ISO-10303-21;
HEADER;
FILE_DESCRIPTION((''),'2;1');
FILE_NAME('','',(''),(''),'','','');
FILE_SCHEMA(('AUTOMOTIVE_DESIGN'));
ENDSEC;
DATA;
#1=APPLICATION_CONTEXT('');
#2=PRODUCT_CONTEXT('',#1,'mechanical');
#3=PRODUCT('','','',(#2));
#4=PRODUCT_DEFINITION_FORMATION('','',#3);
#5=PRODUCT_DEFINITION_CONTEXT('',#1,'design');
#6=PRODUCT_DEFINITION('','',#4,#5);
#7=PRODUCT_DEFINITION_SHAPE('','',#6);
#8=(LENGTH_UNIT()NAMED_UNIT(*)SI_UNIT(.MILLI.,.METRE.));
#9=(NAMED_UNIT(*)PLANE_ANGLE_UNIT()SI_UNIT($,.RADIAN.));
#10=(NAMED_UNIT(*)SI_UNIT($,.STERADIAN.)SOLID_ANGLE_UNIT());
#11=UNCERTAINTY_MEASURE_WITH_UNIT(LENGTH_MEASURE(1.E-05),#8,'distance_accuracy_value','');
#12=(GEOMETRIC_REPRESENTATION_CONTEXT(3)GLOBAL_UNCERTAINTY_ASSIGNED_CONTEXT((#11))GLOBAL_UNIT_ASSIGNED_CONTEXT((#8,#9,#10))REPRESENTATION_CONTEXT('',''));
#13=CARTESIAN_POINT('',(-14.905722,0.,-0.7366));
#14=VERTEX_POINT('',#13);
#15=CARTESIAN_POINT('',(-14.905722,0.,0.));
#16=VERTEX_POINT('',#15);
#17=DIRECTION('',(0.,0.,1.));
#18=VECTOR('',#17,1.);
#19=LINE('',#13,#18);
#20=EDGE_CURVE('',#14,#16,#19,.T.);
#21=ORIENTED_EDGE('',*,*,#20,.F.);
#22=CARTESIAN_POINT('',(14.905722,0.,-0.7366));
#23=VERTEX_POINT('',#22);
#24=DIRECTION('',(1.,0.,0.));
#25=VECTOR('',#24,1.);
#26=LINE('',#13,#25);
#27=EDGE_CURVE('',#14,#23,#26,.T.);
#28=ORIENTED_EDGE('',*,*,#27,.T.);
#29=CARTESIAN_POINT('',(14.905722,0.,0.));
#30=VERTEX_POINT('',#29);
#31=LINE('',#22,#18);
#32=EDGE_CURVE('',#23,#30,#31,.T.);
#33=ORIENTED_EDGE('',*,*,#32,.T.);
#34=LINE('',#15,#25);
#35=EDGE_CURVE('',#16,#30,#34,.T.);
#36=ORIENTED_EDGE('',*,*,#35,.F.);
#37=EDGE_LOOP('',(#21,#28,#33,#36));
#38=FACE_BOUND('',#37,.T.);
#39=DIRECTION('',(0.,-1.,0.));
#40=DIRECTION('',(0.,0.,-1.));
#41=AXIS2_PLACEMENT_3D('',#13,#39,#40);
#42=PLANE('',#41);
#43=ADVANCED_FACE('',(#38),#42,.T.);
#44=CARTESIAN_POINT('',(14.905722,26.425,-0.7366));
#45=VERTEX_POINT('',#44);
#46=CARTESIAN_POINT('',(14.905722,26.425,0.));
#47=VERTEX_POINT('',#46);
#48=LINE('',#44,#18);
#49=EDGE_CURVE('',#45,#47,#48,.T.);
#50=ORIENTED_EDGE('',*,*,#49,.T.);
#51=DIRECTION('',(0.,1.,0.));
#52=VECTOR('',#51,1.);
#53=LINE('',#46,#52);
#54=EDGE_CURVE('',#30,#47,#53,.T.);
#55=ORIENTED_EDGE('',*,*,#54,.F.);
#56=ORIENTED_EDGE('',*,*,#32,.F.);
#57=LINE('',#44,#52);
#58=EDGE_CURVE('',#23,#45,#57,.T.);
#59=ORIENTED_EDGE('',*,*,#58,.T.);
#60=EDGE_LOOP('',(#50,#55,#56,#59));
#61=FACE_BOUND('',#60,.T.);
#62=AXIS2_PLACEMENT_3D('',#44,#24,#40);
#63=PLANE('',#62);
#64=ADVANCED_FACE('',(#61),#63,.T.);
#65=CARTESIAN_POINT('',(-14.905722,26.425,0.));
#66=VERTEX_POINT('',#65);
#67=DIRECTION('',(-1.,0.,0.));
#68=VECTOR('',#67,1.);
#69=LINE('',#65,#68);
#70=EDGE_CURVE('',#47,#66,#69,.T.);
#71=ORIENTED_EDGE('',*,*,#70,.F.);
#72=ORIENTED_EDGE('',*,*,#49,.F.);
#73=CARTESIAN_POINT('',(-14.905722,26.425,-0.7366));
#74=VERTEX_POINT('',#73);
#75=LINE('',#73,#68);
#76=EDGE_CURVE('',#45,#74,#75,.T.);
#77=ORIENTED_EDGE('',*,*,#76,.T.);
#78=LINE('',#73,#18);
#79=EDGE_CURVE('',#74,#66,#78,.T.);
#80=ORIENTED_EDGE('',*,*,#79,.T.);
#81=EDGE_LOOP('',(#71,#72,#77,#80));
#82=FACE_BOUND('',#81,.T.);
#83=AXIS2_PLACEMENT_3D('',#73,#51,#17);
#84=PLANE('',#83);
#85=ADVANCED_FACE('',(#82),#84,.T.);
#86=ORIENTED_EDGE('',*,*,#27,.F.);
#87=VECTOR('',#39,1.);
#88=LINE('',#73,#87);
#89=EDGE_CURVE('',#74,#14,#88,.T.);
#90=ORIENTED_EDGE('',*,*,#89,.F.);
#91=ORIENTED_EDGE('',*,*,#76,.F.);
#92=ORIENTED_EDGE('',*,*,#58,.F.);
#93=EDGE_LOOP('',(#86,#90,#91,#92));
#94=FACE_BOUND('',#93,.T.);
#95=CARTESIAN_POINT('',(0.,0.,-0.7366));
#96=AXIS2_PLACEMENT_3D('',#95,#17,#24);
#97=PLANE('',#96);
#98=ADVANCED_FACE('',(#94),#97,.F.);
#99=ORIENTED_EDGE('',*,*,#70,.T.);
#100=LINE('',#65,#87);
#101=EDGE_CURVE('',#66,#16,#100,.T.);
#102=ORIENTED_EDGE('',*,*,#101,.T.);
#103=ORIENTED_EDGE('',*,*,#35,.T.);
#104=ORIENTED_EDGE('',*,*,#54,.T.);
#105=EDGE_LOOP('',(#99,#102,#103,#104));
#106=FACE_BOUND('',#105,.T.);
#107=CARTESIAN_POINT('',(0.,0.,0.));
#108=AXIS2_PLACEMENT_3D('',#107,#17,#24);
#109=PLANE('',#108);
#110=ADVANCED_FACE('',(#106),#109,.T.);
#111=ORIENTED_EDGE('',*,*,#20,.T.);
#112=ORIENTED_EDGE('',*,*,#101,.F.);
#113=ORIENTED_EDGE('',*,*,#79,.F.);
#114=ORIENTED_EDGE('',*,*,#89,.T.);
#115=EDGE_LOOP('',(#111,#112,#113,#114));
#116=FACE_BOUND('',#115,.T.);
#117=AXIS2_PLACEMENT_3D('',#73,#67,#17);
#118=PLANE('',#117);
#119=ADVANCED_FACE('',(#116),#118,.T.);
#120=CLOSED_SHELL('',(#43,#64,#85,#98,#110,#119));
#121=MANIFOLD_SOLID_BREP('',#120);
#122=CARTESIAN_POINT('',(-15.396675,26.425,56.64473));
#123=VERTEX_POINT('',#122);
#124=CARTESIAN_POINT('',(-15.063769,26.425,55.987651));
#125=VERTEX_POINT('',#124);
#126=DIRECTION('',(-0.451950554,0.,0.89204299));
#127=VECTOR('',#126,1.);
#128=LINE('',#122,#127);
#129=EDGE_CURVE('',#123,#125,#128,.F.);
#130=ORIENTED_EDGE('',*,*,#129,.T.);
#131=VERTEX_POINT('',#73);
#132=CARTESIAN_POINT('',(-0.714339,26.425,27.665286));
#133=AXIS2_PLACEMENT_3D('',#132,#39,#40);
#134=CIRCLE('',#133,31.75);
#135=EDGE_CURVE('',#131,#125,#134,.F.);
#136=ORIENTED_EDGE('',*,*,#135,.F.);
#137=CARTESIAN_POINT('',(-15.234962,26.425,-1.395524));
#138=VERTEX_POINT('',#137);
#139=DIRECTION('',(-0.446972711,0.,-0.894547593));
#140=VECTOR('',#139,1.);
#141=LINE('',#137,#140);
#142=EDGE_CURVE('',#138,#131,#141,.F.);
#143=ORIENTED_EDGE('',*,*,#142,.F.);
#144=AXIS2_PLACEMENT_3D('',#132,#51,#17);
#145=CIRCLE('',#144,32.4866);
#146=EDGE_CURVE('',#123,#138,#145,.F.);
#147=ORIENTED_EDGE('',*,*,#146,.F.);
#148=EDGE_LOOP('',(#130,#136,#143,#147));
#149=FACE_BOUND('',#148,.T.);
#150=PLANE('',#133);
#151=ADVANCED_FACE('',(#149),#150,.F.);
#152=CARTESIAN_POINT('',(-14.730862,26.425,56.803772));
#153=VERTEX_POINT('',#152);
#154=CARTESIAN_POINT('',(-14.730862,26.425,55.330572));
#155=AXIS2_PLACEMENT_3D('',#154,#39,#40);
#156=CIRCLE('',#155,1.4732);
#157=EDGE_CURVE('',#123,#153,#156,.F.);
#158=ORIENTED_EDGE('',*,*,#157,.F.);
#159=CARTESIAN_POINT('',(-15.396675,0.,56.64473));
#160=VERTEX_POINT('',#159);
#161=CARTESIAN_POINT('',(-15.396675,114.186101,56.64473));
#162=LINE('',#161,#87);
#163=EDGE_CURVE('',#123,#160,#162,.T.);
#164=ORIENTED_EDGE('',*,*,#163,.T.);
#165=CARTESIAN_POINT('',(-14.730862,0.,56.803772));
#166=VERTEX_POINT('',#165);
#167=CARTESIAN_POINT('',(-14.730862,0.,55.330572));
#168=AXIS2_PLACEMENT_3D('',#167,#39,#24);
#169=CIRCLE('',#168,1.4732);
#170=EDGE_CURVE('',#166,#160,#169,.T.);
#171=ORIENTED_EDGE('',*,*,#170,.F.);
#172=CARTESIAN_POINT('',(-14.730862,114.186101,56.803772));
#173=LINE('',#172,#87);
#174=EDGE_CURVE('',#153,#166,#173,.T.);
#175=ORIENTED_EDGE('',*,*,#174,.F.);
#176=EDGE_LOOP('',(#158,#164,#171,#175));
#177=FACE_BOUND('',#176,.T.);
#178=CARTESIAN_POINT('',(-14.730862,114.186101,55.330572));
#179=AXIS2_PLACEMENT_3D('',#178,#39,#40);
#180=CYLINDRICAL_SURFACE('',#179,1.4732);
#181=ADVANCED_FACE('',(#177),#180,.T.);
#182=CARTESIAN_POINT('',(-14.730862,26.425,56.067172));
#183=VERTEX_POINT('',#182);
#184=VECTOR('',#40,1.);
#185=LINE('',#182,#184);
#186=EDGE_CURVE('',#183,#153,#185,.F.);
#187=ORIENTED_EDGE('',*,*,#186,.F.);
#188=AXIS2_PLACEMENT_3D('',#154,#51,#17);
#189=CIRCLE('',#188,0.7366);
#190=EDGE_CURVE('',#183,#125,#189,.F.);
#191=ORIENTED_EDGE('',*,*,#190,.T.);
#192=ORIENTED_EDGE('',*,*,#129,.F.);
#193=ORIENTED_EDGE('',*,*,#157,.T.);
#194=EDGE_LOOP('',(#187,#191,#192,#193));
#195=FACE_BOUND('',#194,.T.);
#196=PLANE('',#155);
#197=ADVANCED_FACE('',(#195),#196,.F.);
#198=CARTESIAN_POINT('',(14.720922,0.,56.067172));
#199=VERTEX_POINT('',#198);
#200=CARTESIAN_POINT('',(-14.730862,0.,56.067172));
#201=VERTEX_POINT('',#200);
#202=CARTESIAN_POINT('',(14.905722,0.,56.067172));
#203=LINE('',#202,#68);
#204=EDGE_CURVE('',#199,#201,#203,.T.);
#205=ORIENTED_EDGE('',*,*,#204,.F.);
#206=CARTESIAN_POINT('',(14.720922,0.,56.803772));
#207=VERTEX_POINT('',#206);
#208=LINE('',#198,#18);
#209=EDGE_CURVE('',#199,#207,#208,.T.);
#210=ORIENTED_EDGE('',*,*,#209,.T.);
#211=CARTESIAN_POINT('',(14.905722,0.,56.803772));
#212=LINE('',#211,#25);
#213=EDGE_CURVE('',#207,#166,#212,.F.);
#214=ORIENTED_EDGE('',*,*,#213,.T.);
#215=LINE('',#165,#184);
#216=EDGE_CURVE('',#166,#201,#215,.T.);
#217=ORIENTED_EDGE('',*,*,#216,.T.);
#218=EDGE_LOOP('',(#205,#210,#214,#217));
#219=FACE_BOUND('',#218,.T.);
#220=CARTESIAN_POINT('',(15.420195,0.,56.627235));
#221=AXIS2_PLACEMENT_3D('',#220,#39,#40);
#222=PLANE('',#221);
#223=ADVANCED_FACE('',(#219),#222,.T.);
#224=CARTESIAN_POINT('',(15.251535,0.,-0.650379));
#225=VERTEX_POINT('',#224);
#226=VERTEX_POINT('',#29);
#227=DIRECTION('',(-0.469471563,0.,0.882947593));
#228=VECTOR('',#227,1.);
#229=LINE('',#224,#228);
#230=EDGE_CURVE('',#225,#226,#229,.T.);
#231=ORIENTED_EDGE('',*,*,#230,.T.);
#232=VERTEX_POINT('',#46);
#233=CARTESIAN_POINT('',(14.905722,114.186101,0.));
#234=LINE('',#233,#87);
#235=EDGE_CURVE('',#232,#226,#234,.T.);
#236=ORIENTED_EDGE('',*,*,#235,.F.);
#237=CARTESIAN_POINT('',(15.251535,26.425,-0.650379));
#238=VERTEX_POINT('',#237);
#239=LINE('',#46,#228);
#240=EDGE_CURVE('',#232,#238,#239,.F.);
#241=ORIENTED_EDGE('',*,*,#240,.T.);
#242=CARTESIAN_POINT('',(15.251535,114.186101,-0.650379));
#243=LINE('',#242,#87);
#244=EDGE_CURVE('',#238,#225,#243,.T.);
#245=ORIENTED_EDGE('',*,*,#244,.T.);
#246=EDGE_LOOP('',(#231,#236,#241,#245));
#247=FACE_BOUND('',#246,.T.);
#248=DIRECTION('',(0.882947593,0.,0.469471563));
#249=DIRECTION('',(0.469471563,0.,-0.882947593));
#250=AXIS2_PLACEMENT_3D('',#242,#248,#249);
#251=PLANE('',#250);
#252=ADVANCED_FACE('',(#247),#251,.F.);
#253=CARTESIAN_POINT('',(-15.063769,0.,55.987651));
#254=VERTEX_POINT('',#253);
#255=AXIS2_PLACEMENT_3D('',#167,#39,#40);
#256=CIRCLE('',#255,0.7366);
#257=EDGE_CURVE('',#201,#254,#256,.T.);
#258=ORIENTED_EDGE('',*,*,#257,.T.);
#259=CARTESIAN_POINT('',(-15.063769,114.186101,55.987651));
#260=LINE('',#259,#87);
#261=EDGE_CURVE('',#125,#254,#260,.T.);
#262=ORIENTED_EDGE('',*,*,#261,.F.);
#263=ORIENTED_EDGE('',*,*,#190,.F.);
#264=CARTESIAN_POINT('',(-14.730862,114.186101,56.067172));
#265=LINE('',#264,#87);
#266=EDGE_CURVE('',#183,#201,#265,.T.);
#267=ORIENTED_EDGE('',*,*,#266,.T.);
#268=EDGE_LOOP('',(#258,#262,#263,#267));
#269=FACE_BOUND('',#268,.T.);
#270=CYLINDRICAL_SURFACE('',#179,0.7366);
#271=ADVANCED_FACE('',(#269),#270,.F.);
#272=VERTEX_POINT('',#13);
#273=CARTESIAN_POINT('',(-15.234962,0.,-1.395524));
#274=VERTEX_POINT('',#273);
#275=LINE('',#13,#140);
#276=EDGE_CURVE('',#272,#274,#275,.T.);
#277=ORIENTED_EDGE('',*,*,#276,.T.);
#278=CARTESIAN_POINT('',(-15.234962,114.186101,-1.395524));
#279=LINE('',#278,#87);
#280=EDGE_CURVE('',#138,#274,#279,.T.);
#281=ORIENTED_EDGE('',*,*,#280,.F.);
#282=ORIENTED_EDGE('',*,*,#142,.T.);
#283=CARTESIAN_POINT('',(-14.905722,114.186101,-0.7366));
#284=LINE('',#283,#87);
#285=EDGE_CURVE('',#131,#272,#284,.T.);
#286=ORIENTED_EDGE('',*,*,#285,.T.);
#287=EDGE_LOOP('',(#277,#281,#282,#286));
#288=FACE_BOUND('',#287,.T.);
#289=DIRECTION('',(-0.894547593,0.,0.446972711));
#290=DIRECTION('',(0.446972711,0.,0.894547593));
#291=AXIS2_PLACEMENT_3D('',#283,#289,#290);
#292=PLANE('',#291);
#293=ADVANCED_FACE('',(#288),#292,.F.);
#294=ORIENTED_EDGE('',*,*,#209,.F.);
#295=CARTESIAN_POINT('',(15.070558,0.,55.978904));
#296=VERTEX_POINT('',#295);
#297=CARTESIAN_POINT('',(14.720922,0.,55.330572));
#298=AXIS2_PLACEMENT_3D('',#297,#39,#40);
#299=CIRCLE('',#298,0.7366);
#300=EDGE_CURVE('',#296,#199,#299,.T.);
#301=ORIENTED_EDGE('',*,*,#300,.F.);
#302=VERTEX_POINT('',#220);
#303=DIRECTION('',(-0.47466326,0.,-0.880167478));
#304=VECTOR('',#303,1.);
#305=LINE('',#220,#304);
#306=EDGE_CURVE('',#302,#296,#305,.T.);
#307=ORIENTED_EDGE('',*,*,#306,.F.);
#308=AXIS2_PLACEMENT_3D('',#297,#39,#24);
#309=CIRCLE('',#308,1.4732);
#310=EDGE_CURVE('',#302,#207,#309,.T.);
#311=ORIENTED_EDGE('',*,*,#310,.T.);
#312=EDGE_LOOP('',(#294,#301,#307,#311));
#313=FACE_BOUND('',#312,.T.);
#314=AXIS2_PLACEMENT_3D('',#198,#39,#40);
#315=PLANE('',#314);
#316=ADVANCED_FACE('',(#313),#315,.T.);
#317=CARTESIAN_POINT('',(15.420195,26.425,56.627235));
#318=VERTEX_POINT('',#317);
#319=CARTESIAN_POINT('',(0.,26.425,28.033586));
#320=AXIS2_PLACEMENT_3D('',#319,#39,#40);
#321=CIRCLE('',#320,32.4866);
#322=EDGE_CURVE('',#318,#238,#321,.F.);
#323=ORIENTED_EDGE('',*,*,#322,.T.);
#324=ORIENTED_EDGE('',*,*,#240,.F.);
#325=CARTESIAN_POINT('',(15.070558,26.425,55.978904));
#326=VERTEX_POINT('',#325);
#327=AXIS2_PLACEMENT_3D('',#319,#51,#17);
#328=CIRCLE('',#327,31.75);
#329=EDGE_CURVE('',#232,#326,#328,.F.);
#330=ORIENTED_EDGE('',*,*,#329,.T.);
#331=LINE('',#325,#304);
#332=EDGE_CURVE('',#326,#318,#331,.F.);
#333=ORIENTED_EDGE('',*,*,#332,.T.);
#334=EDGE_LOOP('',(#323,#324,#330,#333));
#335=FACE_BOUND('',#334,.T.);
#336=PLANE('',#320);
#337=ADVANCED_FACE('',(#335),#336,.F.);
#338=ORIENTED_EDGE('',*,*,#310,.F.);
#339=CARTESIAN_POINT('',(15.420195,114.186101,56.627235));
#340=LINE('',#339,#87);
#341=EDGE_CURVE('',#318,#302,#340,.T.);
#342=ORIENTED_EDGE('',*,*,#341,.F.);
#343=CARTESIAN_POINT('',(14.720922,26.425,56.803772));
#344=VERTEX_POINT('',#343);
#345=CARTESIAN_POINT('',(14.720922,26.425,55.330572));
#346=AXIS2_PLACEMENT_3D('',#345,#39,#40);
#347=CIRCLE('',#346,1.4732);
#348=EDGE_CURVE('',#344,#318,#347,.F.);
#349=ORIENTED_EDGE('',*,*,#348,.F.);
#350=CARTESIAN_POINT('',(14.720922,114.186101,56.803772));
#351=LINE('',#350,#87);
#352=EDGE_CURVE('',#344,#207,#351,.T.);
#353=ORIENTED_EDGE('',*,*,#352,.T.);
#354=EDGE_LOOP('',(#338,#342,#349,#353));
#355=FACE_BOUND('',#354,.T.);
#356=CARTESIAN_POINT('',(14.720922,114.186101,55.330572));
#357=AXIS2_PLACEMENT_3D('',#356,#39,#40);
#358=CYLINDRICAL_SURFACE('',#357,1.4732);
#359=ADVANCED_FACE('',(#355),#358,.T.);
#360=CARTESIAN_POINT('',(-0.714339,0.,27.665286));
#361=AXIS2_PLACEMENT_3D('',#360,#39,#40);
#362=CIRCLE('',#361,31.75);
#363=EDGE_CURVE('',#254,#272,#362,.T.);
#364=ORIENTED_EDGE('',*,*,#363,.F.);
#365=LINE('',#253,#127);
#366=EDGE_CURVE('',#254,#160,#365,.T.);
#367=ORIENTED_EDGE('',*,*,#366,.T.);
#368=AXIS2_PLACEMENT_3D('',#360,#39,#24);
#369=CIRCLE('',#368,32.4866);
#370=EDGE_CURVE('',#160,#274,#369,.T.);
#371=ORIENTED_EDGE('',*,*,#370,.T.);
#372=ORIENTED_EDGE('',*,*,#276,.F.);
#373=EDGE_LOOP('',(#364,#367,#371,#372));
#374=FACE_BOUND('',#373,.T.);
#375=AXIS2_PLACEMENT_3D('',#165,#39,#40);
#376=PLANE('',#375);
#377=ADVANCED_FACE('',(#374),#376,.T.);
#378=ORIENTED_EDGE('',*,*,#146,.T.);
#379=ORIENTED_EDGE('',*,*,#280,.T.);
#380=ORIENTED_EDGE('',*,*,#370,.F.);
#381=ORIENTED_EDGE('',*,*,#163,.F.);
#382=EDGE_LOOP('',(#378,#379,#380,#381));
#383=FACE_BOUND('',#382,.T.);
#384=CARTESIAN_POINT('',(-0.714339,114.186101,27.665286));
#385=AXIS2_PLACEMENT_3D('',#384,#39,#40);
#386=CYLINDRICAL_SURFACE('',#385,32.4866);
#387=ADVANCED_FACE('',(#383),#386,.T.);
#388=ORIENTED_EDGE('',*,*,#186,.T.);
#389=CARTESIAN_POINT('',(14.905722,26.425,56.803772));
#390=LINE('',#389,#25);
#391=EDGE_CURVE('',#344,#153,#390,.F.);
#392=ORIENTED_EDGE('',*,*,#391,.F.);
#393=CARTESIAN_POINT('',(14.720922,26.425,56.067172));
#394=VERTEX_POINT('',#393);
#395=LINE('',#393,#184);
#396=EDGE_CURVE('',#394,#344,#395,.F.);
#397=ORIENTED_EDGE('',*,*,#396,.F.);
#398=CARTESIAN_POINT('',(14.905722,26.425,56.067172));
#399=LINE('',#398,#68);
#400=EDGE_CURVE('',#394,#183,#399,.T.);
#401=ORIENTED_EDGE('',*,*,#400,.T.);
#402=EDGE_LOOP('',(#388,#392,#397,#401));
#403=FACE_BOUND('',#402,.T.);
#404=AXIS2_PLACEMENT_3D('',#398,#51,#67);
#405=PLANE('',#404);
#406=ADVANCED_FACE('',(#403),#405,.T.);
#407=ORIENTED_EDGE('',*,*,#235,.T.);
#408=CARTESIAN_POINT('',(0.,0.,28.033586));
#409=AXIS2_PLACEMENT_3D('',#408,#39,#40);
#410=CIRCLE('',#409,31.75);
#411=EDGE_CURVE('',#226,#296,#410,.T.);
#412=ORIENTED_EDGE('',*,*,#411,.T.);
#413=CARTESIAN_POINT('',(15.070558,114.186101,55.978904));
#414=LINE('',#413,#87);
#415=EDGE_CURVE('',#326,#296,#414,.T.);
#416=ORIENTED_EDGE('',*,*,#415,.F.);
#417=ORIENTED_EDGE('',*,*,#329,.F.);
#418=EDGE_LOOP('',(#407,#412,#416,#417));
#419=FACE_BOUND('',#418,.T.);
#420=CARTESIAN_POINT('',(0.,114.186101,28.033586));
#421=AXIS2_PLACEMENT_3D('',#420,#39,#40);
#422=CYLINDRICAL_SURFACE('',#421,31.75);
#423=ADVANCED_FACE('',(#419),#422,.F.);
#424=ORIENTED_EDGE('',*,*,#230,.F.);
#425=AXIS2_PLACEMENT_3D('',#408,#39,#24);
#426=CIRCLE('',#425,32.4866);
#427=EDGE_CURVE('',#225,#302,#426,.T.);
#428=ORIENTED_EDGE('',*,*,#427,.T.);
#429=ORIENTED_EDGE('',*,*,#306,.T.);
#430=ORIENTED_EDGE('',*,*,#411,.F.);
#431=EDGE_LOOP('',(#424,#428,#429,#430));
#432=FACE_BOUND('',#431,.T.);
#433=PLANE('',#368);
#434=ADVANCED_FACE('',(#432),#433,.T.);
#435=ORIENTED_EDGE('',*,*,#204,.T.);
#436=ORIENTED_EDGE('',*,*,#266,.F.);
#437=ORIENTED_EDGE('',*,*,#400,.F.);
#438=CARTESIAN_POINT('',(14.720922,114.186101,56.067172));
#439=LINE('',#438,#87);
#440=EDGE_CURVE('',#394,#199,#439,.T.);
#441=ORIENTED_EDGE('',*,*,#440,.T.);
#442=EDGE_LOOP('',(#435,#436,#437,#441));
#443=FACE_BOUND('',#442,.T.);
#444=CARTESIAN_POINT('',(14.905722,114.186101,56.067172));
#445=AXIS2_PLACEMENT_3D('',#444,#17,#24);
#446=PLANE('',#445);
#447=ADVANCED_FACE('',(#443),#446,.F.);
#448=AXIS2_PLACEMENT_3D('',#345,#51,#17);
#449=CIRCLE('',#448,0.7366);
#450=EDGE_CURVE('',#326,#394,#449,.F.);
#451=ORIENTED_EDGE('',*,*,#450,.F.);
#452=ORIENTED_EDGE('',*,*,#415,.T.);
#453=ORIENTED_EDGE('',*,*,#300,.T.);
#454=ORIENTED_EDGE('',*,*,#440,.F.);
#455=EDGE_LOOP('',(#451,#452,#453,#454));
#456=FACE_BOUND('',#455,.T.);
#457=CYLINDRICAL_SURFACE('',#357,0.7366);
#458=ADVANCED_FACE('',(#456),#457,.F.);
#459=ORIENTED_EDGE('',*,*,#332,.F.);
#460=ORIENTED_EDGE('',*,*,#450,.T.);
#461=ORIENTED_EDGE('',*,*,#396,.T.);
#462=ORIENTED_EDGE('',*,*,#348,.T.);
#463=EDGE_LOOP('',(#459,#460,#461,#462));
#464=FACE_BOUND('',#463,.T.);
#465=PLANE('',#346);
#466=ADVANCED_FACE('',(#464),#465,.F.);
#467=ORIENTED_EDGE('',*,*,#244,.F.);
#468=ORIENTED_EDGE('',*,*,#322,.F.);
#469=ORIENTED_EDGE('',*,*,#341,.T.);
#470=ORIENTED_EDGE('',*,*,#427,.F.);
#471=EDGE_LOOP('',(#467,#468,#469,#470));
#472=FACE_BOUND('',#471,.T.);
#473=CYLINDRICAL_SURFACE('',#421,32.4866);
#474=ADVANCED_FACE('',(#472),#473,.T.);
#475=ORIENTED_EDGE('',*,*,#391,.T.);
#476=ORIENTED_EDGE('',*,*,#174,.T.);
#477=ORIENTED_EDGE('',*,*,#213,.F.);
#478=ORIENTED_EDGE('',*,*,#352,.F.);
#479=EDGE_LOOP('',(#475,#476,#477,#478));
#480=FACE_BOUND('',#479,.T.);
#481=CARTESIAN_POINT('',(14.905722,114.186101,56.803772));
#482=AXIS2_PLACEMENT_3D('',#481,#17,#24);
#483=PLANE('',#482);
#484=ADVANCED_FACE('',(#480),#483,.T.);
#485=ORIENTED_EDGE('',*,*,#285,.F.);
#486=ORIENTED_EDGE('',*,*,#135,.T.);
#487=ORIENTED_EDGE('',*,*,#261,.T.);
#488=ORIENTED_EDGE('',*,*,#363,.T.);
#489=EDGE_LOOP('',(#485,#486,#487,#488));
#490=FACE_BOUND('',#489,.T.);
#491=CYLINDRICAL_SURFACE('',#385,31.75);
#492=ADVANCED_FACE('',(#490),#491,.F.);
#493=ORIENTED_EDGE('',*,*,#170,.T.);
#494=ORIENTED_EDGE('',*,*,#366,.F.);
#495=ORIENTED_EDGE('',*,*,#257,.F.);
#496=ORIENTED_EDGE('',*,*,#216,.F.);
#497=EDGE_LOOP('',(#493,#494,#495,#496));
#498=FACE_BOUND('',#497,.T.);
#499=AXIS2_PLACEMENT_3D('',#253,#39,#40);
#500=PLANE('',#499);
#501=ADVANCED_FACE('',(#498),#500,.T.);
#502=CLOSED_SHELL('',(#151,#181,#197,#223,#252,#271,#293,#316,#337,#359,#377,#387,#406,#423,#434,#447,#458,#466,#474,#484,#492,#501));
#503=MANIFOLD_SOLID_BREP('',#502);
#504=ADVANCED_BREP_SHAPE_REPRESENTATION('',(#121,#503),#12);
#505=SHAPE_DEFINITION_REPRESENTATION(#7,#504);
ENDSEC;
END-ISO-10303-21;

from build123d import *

# Parameters (mm, degrees)
SKETCH1_W          = 29.811444236
SKETCH1_H          = 26.425
BASE_FLANGE1_DEPTH = 0.7366
BASE_FLANGE2_START = -26.425
BASE_FLANGE2_DEPTH = 26.425


# Read off the part's stored shape, not the designer's step: Base-Flange2
# Sheet-metal steps are written as plain solids
with BuildPart() as part:
    # Sketch1 → Base-Flange1 (new body)
    with BuildSketch(Plane.XY):
        with Locations((0, 13.2125)):
            Rectangle(SKETCH1_W, SKETCH1_H)
    extrude(amount=-BASE_FLANGE1_DEPTH)


with BuildPart() as body_2:
    # Base-Flange2 outline → Base-Flange2 (new body)
    with BuildSketch(Plane.XZ.offset(BASE_FLANGE2_START)):
        with BuildLine():
            ThreePointArc((-14.730861876, 56.803772147), (-15.073134478, 56.763460037), (-15.396675433, 56.64472988))
            ThreePointArc((-15.396675433, 56.64472988), (-33.200812457, 27.574771442), (-15.234962217, -1.395523757))
            Line((-15.234962217, -1.395523757), (-14.905722118, -0.7366))
            ThreePointArc((-14.905722118, -0.7366), (-32.464215316, 27.576823767), (-15.063768654, 55.987651013))
            ThreePointArc((-15.063768654, 55.987651013), (-14.901998177, 56.047016092), (-14.730861876, 56.067172147))
            Line((-14.730861876, 56.067172147), (14.720921536, 56.067172147))
            ThreePointArc((14.720921536, 56.067172147), (14.901224998, 56.044764153), (15.070558493, 55.978903511))
            ThreePointArc((15.070558493, 55.978903511), (31.749862353, 27.940094921), (14.905722118, 0))
            Line((14.905722118, 0), (15.251534872, -0.650379197))
            ThreePointArc((15.251534872, -0.650379197), (32.486459159, 27.937925926), (15.42019545, 56.627234876))
            ThreePointArc((15.42019545, 56.627234876), (15.08152846, 56.758956159), (14.720921536, 56.803772147))
            Line((14.720921536, 56.803772147), (-14.730861876, 56.803772147))
        make_face()
    extrude(amount=BASE_FLANGE2_DEPTH)


solid = Compound([part.part, body_2.part])
